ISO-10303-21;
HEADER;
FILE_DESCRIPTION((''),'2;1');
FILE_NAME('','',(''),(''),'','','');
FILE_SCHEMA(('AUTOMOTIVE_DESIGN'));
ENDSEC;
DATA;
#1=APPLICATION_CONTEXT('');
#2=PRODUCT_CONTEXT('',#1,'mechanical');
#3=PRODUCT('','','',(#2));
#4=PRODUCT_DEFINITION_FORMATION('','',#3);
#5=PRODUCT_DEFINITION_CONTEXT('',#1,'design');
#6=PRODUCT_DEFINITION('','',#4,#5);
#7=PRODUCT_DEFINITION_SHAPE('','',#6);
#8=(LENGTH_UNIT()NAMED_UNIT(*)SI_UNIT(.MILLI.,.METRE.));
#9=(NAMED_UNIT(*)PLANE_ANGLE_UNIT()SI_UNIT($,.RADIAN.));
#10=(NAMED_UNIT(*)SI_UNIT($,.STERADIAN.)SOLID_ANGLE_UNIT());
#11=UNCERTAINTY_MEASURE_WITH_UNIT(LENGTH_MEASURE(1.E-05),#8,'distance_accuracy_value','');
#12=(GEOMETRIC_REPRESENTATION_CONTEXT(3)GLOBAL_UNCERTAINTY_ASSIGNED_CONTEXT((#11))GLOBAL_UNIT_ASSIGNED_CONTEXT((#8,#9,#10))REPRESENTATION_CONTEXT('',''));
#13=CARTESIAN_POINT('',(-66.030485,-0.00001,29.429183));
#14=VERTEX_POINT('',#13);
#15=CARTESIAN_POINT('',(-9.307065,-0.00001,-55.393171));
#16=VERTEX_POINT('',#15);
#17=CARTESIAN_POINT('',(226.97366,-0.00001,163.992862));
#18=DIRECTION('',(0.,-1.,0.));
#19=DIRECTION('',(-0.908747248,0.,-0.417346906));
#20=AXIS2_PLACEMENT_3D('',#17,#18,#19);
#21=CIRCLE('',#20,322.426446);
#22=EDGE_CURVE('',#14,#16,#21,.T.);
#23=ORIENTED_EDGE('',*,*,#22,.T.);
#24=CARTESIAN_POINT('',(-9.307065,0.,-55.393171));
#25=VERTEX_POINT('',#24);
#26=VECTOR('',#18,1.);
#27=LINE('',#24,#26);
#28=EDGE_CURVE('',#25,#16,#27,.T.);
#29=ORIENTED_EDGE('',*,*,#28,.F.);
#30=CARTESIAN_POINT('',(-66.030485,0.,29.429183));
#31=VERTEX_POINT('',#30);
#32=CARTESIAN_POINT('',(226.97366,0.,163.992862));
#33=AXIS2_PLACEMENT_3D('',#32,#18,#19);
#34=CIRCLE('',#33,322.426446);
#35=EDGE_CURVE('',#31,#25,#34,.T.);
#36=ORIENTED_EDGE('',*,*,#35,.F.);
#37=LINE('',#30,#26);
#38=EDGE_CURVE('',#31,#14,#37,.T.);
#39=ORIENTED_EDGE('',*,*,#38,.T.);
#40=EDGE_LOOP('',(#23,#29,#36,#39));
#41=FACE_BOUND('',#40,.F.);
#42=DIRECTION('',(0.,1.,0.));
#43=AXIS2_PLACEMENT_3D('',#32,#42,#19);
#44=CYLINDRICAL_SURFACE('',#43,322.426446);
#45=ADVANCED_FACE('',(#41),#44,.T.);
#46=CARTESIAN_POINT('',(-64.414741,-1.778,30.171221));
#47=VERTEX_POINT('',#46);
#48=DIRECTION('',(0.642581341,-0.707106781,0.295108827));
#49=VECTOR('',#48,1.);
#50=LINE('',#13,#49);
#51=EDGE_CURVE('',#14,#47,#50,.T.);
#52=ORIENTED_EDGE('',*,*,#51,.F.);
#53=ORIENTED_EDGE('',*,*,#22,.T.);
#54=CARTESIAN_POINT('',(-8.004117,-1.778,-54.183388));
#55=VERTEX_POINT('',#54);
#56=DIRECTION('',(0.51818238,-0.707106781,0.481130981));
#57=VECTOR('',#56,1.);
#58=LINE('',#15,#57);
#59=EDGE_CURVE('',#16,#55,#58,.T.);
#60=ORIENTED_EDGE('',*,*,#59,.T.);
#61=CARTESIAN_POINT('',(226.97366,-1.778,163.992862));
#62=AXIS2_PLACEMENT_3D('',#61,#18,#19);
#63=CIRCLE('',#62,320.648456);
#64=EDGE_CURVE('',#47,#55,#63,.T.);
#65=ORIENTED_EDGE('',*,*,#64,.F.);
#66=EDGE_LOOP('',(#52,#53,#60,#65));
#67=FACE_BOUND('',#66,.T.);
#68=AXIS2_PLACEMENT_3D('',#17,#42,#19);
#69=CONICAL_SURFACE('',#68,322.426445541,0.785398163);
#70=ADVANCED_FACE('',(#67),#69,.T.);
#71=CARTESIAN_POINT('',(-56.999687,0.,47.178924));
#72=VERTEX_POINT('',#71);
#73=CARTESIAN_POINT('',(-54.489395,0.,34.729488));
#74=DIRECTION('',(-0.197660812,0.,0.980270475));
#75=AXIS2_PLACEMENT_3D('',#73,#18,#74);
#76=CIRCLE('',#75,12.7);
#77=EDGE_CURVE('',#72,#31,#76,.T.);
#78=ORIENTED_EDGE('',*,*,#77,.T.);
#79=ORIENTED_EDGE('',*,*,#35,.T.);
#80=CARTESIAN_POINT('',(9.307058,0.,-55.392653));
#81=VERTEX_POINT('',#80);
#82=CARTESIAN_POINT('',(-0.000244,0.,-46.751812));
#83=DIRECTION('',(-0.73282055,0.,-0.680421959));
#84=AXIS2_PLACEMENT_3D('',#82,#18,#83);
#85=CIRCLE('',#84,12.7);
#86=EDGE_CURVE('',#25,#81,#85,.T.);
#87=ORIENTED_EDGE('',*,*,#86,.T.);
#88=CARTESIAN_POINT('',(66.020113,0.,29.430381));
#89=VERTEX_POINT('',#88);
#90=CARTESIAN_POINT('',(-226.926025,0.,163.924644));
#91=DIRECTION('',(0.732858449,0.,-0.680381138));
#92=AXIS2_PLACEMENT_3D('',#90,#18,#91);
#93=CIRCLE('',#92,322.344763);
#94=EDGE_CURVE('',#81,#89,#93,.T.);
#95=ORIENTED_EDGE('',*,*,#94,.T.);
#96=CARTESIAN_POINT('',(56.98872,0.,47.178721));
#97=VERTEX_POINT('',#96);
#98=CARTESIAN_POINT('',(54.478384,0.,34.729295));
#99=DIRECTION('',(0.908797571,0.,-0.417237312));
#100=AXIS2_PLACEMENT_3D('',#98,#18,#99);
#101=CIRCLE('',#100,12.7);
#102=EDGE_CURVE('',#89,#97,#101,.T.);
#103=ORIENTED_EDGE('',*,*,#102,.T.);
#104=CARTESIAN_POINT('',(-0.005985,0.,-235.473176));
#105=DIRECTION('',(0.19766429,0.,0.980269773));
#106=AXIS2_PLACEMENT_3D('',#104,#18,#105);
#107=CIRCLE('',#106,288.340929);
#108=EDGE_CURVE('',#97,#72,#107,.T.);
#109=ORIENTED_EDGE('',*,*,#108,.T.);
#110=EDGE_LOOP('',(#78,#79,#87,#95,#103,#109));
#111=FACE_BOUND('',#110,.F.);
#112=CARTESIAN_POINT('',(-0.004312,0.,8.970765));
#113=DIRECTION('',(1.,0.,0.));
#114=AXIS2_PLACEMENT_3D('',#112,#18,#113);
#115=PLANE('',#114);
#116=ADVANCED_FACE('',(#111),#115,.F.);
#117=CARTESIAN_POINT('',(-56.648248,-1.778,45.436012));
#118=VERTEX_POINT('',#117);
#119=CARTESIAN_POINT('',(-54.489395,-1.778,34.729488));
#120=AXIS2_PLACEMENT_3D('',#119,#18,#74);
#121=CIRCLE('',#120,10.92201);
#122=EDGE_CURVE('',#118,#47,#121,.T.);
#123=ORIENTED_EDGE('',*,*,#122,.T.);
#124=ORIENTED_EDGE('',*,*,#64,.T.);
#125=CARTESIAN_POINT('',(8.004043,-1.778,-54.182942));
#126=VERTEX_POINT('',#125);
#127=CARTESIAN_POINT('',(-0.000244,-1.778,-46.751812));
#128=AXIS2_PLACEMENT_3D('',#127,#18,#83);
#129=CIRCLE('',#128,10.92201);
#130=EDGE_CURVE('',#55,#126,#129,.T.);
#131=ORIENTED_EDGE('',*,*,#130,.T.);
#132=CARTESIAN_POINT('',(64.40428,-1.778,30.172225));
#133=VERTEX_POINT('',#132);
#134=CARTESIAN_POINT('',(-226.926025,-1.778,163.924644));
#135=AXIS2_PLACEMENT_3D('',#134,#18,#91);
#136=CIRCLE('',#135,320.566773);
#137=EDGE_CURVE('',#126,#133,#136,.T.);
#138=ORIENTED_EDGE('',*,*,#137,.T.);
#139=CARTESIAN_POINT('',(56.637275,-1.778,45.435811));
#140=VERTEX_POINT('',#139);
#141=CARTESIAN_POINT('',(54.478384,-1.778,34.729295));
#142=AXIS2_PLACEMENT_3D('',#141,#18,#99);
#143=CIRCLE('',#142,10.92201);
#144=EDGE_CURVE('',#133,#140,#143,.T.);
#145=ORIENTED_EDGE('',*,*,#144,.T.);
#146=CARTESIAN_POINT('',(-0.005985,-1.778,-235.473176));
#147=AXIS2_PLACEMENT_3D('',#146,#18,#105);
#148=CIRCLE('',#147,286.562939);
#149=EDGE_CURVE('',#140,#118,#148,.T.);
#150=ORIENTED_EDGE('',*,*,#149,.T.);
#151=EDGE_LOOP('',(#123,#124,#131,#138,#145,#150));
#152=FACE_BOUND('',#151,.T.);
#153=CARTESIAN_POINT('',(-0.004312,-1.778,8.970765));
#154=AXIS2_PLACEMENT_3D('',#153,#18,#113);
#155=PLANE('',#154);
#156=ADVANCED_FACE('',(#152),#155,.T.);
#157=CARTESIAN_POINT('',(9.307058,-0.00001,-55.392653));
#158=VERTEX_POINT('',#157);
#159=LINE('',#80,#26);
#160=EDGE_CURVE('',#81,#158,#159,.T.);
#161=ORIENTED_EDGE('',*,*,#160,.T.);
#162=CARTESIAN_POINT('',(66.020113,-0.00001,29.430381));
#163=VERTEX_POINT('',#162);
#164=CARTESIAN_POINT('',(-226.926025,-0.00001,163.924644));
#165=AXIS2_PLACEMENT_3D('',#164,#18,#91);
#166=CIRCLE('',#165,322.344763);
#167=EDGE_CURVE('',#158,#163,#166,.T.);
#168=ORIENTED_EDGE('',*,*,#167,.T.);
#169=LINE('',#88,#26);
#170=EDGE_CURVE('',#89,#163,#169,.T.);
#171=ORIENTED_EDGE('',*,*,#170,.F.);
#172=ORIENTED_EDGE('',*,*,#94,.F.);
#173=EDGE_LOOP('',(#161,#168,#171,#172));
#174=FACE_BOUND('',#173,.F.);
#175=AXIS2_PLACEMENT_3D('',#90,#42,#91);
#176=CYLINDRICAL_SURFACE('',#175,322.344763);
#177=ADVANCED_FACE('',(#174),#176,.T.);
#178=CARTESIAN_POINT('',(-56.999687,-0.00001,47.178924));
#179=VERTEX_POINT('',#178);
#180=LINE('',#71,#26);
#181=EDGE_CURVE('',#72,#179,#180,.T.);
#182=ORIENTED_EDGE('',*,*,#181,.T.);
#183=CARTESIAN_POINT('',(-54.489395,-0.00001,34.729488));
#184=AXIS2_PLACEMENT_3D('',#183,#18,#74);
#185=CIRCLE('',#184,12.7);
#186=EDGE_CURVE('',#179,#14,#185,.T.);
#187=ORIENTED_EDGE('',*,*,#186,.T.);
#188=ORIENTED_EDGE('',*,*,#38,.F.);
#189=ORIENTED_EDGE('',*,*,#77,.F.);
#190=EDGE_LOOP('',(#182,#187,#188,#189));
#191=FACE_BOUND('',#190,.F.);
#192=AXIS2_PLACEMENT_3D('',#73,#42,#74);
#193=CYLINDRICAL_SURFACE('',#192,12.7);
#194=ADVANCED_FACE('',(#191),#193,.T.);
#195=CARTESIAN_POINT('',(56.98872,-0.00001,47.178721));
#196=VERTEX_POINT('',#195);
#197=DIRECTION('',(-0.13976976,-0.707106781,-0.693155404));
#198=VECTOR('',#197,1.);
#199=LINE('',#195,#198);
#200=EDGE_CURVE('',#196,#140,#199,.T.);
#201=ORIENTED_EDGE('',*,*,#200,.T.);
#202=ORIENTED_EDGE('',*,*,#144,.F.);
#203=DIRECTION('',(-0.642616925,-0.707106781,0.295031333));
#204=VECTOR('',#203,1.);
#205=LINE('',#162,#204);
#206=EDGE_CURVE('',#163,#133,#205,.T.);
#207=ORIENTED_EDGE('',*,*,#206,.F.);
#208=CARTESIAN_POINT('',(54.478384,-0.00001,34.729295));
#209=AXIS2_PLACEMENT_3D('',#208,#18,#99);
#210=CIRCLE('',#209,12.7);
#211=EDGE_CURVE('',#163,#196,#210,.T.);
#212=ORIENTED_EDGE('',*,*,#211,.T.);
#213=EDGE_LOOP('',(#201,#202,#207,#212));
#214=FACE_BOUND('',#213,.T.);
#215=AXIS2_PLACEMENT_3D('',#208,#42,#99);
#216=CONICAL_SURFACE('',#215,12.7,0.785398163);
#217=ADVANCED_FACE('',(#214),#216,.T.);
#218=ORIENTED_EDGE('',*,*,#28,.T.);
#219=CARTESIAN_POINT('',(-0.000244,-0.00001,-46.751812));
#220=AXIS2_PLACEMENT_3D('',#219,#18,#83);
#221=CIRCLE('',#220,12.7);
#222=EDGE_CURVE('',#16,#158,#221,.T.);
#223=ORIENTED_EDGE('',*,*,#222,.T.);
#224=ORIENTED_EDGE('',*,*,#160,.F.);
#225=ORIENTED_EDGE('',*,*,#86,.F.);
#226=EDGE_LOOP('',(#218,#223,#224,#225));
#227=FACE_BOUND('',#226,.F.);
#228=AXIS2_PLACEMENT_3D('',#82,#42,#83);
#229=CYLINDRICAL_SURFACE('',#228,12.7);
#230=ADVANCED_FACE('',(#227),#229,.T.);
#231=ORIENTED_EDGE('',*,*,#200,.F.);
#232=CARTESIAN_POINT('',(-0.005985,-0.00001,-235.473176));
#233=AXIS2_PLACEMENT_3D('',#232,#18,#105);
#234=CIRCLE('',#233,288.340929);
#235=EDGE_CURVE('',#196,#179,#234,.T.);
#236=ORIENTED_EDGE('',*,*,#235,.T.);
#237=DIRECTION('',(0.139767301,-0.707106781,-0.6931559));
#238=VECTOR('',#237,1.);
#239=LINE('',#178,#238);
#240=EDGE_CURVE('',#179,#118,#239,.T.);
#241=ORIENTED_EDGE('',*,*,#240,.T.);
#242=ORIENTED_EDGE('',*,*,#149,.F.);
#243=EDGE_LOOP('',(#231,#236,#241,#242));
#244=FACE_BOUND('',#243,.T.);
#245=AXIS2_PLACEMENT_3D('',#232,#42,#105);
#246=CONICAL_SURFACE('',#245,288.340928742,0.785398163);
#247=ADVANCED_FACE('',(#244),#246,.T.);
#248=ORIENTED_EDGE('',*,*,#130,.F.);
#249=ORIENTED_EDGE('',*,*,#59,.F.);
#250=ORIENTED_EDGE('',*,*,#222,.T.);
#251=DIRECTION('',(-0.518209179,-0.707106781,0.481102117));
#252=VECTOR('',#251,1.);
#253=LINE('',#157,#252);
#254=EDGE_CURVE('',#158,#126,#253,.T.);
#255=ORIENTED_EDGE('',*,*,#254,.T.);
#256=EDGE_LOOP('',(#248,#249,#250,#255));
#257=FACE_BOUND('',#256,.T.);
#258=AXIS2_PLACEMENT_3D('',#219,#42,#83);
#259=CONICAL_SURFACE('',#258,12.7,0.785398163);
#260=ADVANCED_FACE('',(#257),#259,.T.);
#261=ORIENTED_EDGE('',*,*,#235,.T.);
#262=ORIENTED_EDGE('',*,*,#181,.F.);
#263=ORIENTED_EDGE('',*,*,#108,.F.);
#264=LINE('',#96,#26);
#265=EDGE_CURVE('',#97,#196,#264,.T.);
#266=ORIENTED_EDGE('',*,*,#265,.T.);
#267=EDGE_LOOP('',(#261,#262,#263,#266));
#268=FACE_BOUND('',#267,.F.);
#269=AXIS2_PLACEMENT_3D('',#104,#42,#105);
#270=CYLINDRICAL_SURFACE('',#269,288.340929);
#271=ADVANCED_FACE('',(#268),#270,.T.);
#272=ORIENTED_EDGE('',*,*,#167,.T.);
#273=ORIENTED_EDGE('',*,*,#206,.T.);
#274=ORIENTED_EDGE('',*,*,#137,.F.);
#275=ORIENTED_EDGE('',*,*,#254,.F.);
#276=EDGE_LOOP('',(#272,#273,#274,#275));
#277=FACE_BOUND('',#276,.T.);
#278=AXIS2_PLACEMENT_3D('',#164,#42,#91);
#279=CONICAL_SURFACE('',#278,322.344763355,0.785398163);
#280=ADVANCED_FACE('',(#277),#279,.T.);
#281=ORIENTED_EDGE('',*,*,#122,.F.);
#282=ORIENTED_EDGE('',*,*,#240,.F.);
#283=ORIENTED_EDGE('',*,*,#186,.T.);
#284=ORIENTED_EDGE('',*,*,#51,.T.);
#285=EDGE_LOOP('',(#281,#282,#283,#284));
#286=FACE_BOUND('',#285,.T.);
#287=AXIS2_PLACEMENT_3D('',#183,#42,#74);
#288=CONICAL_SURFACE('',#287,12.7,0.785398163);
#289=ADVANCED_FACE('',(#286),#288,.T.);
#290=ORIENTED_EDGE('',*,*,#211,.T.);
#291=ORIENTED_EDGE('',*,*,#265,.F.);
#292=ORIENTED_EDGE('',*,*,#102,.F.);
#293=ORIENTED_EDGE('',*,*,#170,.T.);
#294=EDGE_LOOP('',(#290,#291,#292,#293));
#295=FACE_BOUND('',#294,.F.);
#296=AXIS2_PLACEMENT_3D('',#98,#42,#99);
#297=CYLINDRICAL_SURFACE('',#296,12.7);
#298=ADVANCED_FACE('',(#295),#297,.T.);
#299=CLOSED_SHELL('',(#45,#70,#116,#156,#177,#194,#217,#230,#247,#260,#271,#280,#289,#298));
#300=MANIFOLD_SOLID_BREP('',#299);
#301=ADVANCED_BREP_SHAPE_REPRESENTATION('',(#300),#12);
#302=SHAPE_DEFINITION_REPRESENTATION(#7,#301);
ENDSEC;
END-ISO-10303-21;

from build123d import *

# Parameters (mm, degrees)
F1_DEPTH = 1.778
F2_SIZE  = 1.77799


# Not quite as in the source:
# - a fillet or chamfer is up to 0.001 mm smaller than in the source, because OpenCascade refuses the exact size


with BuildPart() as f1:
    # F0 (on Front) → F1 (new body)
    with BuildSketch(Plane.XZ):
        with BuildLine():
            ThreePointArc((66.0201128793, 29.4303813325), (65.7972189254, 40.488980065), (56.9887202123, 47.1787213202))
            ThreePointArc((56.9887202123, 47.1787213202), (-0.0054733282, 52.8677532198), (-56.9996870512, 47.1789235179))
            ThreePointArc((-56.9996870512, 47.1789235179), (-65.8085669907, 40.4885109251), (-66.0304847763, 29.4291827833))
            ThreePointArc((-66.0304847763, 29.4291827833), (-41.0456047225, -15.2401883532), (-9.3070649286, -55.3931713157))
            ThreePointArc((-9.3070649286, -55.3931713157), (0.0001097607, -59.4518124354), (9.3070583612, -55.392652894))
            ThreePointArc((9.3070583612, -55.392652894), (41.0411349867, -15.2393801728), (66.0201128793, 29.4303813325))
        make_face()
    extrude(amount=F1_DEPTH)

    # F2 (size 1.778 in the source; OpenCascade refuses exactly that, so slightly less here)
    f2_edges = [f1.edges().sort_by_distance(p)[0] for p in [
        (-41.045605, -1.778, -15.240188),
    ]]
    chamfer(f2_edges, length=F2_SIZE)


solid = f1.part
